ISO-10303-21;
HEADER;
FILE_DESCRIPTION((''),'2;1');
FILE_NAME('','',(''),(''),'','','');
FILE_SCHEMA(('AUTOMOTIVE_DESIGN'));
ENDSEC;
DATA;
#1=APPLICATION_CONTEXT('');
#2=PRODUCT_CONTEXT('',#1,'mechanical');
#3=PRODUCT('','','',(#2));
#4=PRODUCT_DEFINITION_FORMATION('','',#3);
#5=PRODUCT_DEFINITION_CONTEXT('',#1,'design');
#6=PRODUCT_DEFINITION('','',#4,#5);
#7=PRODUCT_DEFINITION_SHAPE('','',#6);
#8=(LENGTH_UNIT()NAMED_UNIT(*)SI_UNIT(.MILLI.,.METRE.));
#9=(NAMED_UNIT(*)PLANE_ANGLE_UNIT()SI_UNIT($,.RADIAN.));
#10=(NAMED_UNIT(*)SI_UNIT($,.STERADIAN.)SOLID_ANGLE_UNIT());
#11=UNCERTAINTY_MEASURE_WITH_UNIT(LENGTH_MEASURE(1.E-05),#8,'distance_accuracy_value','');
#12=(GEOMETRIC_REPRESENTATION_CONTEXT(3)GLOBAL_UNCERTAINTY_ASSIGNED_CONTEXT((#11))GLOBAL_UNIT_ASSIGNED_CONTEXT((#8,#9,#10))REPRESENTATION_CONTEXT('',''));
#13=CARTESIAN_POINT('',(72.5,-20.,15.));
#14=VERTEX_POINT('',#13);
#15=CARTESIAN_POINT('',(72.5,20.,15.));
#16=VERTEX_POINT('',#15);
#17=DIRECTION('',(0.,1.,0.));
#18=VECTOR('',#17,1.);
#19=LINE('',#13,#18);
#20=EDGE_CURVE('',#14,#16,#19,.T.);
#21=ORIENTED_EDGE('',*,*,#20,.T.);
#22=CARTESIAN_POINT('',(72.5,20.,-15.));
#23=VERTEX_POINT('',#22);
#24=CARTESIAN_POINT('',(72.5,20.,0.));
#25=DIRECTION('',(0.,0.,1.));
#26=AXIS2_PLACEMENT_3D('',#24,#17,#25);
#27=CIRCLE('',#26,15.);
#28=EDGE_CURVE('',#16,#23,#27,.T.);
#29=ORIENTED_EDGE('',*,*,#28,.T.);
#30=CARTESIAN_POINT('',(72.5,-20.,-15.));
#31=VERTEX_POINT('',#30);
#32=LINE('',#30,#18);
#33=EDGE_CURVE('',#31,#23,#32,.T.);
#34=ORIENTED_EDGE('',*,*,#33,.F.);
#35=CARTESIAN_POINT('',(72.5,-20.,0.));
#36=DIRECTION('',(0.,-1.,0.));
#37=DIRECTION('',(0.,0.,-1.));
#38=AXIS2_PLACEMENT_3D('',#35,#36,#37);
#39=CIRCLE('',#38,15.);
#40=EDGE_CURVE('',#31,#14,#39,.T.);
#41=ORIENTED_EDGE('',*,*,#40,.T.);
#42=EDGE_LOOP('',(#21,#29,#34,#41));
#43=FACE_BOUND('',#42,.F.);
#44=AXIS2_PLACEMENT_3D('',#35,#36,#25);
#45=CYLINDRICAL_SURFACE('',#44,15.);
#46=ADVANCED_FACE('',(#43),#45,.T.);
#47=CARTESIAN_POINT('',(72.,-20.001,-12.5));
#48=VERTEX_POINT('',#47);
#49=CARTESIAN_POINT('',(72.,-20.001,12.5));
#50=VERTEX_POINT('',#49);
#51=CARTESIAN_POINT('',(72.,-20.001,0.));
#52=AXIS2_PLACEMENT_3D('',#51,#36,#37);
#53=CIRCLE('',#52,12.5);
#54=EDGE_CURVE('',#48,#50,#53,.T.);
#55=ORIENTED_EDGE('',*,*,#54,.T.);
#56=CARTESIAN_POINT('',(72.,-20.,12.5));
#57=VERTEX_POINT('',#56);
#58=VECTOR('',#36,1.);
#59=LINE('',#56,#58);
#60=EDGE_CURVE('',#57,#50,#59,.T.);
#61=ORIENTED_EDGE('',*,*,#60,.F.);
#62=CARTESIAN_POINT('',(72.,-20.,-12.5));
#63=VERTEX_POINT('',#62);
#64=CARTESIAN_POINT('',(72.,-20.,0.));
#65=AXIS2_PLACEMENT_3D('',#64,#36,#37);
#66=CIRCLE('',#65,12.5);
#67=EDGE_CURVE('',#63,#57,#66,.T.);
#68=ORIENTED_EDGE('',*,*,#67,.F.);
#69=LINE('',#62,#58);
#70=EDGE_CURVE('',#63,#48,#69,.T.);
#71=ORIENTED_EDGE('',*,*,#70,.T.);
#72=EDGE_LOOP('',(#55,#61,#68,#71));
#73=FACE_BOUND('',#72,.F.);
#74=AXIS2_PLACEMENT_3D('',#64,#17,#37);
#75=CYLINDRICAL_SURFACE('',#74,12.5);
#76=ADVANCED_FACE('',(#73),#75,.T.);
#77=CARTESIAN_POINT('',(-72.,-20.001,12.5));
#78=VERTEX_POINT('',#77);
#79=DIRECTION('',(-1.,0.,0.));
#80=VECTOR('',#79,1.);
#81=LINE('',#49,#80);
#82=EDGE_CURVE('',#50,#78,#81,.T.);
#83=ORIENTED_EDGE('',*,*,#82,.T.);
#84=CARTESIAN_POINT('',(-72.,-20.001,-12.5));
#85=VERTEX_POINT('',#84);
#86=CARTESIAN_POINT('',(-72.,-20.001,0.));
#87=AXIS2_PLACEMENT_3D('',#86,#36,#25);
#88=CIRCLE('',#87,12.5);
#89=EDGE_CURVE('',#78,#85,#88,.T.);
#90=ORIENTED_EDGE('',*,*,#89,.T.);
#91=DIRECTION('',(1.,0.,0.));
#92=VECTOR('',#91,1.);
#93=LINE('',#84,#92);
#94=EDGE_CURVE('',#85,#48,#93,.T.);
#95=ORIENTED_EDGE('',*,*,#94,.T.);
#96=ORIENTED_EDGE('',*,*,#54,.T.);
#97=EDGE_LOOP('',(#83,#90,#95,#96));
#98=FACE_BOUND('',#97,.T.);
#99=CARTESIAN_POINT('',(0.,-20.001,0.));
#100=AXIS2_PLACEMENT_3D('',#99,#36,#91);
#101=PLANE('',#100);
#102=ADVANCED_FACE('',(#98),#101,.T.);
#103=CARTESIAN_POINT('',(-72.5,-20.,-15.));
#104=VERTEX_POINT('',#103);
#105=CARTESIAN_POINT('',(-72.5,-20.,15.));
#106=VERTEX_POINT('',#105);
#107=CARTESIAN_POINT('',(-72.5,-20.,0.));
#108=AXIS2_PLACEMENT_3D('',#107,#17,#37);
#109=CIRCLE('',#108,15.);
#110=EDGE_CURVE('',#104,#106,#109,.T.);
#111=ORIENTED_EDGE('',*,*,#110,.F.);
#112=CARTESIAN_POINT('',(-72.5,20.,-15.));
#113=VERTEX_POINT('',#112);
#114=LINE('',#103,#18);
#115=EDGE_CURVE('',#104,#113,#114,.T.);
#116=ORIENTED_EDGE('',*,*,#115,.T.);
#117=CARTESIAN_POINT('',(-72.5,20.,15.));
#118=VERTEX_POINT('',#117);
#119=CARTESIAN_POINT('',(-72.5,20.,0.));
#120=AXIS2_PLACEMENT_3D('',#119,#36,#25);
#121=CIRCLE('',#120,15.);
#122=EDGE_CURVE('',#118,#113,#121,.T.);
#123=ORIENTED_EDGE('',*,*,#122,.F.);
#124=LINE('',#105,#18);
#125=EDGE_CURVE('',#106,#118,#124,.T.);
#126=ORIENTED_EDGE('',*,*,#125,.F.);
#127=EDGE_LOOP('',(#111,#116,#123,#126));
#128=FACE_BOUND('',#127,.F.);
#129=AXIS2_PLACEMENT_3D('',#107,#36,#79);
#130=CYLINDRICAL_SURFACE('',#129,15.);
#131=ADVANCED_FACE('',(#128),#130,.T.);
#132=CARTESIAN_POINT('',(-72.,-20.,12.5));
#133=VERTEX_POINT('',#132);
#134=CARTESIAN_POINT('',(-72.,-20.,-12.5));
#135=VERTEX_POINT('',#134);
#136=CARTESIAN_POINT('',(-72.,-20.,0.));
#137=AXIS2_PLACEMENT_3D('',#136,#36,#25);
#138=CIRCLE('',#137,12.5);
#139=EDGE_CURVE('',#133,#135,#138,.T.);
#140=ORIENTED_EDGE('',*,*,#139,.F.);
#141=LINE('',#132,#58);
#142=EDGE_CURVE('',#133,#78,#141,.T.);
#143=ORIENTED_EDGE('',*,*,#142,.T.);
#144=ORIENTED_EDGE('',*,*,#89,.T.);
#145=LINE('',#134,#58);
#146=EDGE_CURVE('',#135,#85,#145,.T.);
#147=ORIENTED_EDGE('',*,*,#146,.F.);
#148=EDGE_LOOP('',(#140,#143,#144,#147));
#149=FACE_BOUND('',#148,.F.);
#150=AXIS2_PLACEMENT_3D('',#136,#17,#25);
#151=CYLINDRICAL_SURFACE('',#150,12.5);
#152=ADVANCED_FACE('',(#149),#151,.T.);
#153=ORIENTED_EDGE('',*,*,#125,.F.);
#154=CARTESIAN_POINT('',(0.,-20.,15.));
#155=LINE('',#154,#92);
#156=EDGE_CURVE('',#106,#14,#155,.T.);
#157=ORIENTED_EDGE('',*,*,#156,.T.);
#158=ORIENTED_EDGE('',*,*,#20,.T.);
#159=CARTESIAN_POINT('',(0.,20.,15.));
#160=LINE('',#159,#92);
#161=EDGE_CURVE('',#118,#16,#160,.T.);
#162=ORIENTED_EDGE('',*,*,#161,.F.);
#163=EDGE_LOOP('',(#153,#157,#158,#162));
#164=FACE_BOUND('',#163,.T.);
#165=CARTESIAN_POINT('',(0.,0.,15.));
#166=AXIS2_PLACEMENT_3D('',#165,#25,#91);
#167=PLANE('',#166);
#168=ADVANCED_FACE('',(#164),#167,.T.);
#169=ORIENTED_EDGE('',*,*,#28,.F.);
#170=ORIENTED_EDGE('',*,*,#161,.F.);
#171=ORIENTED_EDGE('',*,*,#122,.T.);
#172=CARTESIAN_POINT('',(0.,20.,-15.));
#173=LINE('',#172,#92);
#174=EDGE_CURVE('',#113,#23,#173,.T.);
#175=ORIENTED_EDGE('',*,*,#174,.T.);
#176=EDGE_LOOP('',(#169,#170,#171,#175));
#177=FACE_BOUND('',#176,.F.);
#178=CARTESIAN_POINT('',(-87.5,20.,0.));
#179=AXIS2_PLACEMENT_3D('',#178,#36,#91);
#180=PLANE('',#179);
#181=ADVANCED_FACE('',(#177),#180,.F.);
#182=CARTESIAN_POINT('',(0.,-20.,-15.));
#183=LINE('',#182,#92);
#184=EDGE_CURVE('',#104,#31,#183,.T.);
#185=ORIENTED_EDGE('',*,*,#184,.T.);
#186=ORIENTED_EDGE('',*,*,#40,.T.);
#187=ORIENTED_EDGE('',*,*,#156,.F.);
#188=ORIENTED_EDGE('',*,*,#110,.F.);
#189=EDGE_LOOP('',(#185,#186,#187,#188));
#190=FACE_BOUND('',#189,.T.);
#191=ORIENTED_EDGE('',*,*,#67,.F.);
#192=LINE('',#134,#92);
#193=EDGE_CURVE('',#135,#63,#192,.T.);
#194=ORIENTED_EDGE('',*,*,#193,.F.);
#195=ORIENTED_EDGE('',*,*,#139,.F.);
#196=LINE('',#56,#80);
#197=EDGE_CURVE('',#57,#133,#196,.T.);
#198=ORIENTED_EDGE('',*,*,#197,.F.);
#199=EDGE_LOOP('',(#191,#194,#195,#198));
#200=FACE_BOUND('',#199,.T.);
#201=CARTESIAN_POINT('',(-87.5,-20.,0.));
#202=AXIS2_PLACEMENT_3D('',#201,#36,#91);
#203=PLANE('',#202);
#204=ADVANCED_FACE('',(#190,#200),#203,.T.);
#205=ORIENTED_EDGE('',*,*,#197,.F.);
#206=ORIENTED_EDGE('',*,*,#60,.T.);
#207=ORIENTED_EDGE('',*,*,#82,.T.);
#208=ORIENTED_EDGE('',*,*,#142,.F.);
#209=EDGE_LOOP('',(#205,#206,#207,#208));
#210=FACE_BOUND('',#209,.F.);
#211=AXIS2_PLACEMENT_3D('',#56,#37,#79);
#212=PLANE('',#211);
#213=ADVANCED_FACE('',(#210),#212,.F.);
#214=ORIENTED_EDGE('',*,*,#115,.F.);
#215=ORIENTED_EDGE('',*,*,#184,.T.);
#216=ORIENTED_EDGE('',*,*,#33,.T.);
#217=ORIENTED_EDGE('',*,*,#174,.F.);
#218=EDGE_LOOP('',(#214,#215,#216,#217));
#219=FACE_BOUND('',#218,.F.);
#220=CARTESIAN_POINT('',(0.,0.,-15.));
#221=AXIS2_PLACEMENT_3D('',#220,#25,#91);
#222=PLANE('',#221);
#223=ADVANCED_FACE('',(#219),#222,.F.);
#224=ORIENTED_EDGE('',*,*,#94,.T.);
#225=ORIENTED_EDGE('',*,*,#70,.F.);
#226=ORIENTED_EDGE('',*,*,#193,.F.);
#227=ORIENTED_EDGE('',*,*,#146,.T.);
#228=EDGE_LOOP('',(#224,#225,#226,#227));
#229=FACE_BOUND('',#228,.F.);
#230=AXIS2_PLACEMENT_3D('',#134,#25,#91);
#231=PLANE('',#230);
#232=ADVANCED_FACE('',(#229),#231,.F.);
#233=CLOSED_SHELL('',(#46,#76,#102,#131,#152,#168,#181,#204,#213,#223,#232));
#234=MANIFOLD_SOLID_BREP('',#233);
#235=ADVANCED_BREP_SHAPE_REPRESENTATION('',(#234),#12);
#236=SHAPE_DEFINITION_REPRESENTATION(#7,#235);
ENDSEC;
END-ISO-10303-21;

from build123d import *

# Parameters (mm, degrees)
F0_W     = 175
F0_H     = 40
F1_DEPTH = 15
F3_DEPTH = 50.8
F5_DEPTH = 0.001


# Not quite as in the source:
# - a feature names something its author has since deleted; it is built from what else it names


with BuildPart() as f1:
    # F0 (on Top) → F1 (new body, symmetric)
    with BuildSketch(Plane.XY):
        Rectangle(F0_W, F0_H)
    extrude(amount=F1_DEPTH, both=True)

    # F2 (on face) → F3 (cut)
    with BuildSketch(Plane.XZ.offset(20)):
        with BuildLine():
            ThreePointArc((-87.5, 0), (-83.1066017178, 10.6066017178), (-72.5, 15))
            Line((-72.5, 15), (-87.5, 15))
            Line((-87.5, 15), (-87.5, 0))
        make_face()
        with BuildLine():
            Line((-87.5, -15), (-72.5, -15))
            ThreePointArc((-72.5, -15), (-83.1066017178, -10.6066017178), (-87.5, 0))
            Line((-87.5, 0), (-87.5, -15))
        make_face()
        with BuildLine():
            ThreePointArc((87.5, 0), (83.1066017178, -10.6066017178), (72.5, -15))
            Line((72.5, -15), (87.5, -15))
            Line((87.5, -15), (87.5, 0))
        make_face()
        with BuildLine():
            Line((87.5, 15), (72.5, 15))
            ThreePointArc((72.5, 15), (83.1066017178, 10.6066017178), (87.5, 0))
            Line((87.5, 0), (87.5, 15))
        make_face()
    extrude(amount=-F3_DEPTH, mode=Mode.SUBTRACT)

    # F4 (on face) → F5 (join)
    with BuildSketch(Plane.XZ.offset(20)):
        with BuildLine():
            Line((72, 12.5), (-72, 12.5))
            ThreePointArc((-72, 12.5), (-84.5, 0), (-72, -12.5))
            Line((-72, -12.5), (0, -12.5))
            Line((0, -12.5), (72, -12.5))
            ThreePointArc((72, -12.5), (84.5, 0), (72, 12.5))
        make_face()
    extrude(amount=F5_DEPTH)


solid = f1.part
